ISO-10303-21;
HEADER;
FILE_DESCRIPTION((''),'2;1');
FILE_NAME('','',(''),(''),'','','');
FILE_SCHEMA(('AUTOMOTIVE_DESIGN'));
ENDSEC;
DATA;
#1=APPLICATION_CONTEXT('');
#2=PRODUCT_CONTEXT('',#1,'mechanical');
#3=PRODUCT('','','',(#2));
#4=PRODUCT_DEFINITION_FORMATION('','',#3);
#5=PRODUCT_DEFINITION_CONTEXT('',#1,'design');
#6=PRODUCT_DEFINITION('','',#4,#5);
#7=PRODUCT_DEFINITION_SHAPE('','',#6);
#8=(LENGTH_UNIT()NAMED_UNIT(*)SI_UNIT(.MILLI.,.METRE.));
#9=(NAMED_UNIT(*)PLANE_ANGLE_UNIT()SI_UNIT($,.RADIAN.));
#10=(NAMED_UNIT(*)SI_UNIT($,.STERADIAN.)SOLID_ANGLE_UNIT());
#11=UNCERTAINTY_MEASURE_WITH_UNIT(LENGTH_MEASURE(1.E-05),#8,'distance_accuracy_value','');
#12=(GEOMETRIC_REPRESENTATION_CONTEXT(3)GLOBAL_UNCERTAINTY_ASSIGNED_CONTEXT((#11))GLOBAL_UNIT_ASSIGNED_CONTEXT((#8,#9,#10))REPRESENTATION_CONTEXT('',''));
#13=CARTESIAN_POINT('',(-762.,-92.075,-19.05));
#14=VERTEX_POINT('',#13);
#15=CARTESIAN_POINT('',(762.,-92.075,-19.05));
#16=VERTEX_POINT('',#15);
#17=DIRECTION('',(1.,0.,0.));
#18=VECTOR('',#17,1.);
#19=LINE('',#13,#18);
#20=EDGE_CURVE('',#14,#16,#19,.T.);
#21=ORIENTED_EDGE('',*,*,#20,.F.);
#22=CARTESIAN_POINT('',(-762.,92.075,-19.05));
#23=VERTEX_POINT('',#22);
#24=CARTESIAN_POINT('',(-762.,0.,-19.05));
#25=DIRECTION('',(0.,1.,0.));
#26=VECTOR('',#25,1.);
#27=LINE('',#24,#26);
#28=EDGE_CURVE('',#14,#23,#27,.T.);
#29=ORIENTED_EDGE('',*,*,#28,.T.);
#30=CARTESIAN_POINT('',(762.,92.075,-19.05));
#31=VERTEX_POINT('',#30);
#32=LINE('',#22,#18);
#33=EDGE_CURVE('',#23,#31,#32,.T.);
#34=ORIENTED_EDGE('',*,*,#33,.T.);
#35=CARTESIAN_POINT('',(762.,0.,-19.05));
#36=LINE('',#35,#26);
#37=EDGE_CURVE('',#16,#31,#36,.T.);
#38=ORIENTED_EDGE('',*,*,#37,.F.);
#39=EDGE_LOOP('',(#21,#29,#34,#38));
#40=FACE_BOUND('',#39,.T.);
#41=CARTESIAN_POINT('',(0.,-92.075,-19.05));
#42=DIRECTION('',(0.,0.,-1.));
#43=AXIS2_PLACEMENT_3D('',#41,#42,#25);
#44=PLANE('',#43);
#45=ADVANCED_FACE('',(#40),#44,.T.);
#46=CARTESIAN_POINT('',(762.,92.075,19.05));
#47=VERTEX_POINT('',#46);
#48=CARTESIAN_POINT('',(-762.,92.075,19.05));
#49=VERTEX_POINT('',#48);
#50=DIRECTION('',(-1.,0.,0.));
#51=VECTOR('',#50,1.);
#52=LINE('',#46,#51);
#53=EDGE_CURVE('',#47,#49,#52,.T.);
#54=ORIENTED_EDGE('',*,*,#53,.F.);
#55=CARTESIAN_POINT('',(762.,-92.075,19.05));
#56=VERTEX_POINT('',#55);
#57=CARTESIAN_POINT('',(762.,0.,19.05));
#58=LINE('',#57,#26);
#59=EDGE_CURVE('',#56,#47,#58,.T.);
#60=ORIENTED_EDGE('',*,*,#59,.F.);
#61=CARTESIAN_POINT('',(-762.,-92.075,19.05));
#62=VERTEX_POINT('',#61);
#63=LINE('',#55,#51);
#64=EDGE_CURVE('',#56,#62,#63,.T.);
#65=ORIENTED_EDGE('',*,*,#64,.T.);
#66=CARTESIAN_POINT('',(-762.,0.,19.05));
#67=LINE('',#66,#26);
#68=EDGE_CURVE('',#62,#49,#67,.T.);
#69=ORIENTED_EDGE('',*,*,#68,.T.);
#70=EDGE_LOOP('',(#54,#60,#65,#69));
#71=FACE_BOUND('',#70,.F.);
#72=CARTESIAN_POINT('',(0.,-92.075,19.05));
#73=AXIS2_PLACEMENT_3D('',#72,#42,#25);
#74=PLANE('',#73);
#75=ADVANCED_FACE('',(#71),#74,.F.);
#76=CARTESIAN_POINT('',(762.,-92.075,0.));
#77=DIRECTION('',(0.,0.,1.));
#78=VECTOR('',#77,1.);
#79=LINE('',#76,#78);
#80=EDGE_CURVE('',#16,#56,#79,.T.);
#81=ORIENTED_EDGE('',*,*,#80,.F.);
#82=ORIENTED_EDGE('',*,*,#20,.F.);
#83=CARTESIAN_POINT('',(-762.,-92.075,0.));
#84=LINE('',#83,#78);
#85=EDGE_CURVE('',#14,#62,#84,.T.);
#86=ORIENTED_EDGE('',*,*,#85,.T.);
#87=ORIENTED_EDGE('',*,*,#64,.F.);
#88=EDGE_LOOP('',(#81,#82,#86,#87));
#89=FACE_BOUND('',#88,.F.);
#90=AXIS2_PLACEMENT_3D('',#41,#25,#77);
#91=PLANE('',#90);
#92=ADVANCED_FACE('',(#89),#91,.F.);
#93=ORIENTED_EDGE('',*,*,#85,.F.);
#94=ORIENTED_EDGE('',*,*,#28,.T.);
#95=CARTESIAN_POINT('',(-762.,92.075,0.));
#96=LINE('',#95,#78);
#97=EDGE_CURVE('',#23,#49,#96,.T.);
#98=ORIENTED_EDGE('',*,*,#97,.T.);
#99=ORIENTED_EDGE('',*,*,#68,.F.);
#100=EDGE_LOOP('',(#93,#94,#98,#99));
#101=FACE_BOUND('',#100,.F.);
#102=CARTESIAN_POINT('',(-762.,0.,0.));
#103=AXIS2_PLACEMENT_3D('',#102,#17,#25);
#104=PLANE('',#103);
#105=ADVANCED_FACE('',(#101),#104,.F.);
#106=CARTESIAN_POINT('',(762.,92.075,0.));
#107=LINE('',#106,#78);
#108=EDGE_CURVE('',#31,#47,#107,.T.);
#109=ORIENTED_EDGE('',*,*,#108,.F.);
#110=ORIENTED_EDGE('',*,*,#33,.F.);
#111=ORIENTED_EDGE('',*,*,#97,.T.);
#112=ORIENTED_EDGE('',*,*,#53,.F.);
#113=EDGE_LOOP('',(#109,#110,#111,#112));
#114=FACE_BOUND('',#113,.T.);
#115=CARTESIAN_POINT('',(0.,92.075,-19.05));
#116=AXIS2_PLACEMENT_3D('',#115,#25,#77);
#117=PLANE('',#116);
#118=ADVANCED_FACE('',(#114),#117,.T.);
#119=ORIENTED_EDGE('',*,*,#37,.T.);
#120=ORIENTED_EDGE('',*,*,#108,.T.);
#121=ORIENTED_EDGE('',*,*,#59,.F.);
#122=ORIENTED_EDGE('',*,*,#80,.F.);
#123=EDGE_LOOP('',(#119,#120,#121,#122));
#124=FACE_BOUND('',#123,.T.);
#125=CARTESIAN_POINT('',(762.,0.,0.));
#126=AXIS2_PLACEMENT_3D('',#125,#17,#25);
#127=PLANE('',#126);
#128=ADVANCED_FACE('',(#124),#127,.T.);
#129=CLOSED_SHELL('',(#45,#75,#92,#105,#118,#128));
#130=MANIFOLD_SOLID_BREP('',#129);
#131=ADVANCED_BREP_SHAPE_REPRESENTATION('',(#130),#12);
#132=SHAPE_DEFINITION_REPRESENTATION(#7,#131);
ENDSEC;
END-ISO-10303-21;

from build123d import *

# Parameters (mm, degrees)
F1_W     = 184.15
F1_H     = 38.1
F2_DEPTH = 762


# Not quite as in the source:
# - a variable given as a bare number and used for a length is read in inches; the dataset says mm whatever the document's units were


with BuildPart() as f2:
    # F1 (on Right) → F2 (new body, symmetric)
    with BuildSketch(Plane.YZ):
        Rectangle(F1_W, F1_H)
    extrude(amount=F2_DEPTH, both=True)


solid = f2.part
